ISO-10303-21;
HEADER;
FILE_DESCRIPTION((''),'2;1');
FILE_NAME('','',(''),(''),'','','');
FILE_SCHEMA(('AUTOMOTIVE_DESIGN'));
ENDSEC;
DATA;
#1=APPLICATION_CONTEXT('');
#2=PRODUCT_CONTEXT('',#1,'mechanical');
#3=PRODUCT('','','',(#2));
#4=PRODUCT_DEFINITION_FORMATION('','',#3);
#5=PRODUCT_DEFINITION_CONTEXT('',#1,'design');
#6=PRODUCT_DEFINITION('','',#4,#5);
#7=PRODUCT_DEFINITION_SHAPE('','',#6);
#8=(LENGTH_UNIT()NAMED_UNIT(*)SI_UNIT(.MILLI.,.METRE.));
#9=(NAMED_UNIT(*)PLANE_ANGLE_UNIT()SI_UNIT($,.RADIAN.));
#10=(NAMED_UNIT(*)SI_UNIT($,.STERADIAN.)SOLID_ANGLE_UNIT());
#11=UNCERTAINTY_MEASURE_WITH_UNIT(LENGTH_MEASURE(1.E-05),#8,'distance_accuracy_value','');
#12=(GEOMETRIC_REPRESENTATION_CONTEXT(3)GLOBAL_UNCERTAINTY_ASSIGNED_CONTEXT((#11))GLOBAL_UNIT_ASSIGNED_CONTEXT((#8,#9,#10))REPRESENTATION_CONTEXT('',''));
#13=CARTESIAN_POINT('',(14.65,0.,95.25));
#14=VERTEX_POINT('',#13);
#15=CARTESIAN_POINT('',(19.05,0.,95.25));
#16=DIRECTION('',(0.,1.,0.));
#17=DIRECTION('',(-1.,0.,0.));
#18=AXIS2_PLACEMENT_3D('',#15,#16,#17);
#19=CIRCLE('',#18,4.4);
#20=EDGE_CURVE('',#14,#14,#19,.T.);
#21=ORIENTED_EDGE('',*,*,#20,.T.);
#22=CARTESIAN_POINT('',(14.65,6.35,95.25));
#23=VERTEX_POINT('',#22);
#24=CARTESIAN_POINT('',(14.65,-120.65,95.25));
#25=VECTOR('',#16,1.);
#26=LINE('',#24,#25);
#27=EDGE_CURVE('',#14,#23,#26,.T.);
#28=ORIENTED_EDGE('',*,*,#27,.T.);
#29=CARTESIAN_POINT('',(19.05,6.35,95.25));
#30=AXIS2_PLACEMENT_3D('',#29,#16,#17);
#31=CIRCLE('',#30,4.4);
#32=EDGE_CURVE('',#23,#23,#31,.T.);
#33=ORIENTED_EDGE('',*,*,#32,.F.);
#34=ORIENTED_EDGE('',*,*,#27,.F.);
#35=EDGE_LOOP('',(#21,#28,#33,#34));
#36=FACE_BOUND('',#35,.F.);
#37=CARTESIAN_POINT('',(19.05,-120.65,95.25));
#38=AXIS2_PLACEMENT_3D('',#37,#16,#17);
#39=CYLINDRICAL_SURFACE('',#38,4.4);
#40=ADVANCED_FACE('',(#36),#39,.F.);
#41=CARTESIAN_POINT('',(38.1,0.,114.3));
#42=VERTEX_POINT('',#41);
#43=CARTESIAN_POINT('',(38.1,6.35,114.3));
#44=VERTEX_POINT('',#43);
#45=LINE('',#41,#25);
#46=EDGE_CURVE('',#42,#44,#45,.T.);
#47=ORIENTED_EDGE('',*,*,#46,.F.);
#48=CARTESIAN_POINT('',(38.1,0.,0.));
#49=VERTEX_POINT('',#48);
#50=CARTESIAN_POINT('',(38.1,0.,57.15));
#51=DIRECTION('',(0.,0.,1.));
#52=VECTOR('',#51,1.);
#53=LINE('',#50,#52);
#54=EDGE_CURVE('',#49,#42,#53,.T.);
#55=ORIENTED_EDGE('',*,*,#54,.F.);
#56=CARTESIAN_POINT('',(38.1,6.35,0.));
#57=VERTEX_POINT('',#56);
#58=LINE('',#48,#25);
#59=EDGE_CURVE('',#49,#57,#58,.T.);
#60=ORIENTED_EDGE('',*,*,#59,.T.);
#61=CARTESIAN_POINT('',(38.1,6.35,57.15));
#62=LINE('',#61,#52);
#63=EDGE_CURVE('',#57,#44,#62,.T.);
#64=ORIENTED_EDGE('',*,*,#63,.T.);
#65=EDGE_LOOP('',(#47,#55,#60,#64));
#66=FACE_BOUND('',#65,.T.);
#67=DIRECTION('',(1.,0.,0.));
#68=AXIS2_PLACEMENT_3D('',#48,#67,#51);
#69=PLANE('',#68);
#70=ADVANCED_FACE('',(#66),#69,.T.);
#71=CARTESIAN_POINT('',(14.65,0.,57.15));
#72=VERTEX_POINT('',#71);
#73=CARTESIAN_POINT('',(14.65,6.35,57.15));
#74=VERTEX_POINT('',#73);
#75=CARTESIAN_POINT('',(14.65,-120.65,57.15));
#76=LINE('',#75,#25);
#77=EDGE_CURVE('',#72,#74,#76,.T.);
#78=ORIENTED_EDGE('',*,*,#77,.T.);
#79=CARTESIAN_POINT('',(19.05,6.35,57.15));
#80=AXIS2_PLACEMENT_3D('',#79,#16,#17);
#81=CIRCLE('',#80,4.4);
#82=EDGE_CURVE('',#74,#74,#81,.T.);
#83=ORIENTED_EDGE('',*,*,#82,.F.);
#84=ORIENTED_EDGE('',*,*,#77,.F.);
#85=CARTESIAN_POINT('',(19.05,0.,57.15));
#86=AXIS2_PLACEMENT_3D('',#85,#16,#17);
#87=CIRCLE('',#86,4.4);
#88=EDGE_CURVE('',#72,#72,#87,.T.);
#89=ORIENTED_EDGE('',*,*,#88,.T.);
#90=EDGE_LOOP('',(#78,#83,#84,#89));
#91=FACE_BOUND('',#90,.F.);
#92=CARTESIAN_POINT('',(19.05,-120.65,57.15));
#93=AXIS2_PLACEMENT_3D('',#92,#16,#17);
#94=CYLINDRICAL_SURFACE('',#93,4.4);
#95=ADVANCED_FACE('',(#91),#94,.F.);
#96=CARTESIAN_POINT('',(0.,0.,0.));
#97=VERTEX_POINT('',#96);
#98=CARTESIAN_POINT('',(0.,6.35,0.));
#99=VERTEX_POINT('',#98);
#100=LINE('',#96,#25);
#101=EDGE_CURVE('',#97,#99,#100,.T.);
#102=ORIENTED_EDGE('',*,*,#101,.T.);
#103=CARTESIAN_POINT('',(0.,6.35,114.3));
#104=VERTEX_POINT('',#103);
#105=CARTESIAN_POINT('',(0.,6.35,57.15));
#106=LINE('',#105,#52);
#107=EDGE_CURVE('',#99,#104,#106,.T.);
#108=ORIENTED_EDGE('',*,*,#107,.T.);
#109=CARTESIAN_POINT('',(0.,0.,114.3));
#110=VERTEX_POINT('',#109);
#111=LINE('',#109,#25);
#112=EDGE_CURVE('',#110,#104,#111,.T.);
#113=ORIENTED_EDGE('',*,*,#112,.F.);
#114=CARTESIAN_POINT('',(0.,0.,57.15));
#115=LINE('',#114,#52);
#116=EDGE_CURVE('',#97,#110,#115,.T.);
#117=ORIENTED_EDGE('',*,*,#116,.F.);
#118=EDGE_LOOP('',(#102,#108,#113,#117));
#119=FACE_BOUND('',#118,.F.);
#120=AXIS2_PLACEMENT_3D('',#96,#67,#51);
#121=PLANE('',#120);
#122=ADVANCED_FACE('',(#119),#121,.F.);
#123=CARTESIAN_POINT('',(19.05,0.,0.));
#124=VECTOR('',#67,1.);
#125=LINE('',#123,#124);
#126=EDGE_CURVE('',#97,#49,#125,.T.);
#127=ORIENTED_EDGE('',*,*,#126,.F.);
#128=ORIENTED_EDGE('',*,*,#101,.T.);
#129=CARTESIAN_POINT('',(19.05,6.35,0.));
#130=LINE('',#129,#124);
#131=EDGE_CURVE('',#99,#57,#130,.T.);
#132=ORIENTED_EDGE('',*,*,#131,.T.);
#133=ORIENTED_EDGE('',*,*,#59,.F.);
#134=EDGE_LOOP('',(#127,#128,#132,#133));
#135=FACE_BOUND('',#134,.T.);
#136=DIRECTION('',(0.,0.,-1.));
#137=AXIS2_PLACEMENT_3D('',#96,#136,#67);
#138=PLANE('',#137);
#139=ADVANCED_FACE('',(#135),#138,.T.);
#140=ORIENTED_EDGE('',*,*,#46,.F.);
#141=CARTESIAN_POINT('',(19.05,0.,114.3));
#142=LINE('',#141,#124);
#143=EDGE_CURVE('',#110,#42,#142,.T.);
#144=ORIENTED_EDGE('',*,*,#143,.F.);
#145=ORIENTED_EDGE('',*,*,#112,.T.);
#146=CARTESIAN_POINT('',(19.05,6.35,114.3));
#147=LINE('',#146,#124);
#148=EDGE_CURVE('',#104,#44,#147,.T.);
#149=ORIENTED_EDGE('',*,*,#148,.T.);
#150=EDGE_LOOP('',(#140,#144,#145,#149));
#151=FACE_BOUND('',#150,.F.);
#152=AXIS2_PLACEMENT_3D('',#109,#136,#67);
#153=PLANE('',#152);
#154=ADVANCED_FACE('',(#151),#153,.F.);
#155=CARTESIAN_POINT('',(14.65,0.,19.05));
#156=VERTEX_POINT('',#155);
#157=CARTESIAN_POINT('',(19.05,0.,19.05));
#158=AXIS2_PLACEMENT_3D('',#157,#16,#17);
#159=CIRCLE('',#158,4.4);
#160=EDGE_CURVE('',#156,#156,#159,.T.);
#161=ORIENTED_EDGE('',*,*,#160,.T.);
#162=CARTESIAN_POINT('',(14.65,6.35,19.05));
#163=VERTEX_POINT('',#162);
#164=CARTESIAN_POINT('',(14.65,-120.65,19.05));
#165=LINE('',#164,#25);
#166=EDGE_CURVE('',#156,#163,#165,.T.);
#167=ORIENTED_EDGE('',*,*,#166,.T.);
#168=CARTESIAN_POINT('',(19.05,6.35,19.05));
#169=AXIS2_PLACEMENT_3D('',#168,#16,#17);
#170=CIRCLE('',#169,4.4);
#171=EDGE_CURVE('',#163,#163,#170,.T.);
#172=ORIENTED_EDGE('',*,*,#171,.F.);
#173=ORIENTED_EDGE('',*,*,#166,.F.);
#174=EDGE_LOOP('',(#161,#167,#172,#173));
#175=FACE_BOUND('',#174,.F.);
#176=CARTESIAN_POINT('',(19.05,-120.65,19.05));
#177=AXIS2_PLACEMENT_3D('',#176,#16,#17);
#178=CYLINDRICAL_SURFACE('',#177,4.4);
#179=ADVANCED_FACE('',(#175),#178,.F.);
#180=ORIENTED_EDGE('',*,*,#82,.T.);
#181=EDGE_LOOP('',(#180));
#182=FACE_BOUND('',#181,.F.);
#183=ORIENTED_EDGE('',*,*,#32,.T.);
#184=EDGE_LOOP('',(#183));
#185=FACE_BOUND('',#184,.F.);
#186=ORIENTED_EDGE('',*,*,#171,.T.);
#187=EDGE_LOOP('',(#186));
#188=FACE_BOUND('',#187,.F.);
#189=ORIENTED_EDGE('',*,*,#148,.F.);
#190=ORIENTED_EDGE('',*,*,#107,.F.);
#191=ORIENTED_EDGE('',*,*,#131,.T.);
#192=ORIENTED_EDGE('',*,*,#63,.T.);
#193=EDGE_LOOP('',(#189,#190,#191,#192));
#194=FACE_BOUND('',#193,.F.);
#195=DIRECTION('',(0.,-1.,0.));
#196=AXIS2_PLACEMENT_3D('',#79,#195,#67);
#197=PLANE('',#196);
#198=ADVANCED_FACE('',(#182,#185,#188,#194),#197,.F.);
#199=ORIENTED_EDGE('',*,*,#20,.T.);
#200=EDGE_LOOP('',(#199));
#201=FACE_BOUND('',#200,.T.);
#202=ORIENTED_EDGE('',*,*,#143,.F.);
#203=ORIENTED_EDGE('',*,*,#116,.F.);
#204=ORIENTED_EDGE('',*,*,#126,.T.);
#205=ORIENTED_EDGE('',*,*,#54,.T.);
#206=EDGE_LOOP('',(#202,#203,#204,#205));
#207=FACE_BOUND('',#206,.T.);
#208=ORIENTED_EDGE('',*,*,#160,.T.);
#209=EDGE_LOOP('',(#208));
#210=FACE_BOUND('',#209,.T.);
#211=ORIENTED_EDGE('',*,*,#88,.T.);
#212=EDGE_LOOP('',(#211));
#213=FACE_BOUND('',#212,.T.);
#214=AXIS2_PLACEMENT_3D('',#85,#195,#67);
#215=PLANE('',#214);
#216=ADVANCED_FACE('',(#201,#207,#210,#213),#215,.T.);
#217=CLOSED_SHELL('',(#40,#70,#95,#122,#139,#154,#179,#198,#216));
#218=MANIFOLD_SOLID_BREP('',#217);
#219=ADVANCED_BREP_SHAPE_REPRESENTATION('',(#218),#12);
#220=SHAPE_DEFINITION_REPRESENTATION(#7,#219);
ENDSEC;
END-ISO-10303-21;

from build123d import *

# Parameters (mm, degrees)
F0_W     = 38.1
F0_H     = 114.3
F1_DEPTH = 6.35
F2_D     = 8.8


# Not quite as in the source:
# - a length typed as a fraction of an inch, garbled in the dataset ("3 / 203.2 mm" for 3/8 in), is restored
# - a feature names something its author has since deleted; it is built from what else it names


with BuildPart() as f1:
    # F0 (on Front) → F1 (new body)
    with BuildSketch(Plane.XZ):
        with Locations((19.05, 57.15)):
            Rectangle(F0_W, F0_H)
    extrude(amount=-F1_DEPTH)

    # F2 (through all)
    with Locations(Plane.XZ):
        with Locations((19.05, 95.25), (19.05, 57.15), (19.05, 19.05)):
            Hole(F2_D / 2)


solid = f1.part
